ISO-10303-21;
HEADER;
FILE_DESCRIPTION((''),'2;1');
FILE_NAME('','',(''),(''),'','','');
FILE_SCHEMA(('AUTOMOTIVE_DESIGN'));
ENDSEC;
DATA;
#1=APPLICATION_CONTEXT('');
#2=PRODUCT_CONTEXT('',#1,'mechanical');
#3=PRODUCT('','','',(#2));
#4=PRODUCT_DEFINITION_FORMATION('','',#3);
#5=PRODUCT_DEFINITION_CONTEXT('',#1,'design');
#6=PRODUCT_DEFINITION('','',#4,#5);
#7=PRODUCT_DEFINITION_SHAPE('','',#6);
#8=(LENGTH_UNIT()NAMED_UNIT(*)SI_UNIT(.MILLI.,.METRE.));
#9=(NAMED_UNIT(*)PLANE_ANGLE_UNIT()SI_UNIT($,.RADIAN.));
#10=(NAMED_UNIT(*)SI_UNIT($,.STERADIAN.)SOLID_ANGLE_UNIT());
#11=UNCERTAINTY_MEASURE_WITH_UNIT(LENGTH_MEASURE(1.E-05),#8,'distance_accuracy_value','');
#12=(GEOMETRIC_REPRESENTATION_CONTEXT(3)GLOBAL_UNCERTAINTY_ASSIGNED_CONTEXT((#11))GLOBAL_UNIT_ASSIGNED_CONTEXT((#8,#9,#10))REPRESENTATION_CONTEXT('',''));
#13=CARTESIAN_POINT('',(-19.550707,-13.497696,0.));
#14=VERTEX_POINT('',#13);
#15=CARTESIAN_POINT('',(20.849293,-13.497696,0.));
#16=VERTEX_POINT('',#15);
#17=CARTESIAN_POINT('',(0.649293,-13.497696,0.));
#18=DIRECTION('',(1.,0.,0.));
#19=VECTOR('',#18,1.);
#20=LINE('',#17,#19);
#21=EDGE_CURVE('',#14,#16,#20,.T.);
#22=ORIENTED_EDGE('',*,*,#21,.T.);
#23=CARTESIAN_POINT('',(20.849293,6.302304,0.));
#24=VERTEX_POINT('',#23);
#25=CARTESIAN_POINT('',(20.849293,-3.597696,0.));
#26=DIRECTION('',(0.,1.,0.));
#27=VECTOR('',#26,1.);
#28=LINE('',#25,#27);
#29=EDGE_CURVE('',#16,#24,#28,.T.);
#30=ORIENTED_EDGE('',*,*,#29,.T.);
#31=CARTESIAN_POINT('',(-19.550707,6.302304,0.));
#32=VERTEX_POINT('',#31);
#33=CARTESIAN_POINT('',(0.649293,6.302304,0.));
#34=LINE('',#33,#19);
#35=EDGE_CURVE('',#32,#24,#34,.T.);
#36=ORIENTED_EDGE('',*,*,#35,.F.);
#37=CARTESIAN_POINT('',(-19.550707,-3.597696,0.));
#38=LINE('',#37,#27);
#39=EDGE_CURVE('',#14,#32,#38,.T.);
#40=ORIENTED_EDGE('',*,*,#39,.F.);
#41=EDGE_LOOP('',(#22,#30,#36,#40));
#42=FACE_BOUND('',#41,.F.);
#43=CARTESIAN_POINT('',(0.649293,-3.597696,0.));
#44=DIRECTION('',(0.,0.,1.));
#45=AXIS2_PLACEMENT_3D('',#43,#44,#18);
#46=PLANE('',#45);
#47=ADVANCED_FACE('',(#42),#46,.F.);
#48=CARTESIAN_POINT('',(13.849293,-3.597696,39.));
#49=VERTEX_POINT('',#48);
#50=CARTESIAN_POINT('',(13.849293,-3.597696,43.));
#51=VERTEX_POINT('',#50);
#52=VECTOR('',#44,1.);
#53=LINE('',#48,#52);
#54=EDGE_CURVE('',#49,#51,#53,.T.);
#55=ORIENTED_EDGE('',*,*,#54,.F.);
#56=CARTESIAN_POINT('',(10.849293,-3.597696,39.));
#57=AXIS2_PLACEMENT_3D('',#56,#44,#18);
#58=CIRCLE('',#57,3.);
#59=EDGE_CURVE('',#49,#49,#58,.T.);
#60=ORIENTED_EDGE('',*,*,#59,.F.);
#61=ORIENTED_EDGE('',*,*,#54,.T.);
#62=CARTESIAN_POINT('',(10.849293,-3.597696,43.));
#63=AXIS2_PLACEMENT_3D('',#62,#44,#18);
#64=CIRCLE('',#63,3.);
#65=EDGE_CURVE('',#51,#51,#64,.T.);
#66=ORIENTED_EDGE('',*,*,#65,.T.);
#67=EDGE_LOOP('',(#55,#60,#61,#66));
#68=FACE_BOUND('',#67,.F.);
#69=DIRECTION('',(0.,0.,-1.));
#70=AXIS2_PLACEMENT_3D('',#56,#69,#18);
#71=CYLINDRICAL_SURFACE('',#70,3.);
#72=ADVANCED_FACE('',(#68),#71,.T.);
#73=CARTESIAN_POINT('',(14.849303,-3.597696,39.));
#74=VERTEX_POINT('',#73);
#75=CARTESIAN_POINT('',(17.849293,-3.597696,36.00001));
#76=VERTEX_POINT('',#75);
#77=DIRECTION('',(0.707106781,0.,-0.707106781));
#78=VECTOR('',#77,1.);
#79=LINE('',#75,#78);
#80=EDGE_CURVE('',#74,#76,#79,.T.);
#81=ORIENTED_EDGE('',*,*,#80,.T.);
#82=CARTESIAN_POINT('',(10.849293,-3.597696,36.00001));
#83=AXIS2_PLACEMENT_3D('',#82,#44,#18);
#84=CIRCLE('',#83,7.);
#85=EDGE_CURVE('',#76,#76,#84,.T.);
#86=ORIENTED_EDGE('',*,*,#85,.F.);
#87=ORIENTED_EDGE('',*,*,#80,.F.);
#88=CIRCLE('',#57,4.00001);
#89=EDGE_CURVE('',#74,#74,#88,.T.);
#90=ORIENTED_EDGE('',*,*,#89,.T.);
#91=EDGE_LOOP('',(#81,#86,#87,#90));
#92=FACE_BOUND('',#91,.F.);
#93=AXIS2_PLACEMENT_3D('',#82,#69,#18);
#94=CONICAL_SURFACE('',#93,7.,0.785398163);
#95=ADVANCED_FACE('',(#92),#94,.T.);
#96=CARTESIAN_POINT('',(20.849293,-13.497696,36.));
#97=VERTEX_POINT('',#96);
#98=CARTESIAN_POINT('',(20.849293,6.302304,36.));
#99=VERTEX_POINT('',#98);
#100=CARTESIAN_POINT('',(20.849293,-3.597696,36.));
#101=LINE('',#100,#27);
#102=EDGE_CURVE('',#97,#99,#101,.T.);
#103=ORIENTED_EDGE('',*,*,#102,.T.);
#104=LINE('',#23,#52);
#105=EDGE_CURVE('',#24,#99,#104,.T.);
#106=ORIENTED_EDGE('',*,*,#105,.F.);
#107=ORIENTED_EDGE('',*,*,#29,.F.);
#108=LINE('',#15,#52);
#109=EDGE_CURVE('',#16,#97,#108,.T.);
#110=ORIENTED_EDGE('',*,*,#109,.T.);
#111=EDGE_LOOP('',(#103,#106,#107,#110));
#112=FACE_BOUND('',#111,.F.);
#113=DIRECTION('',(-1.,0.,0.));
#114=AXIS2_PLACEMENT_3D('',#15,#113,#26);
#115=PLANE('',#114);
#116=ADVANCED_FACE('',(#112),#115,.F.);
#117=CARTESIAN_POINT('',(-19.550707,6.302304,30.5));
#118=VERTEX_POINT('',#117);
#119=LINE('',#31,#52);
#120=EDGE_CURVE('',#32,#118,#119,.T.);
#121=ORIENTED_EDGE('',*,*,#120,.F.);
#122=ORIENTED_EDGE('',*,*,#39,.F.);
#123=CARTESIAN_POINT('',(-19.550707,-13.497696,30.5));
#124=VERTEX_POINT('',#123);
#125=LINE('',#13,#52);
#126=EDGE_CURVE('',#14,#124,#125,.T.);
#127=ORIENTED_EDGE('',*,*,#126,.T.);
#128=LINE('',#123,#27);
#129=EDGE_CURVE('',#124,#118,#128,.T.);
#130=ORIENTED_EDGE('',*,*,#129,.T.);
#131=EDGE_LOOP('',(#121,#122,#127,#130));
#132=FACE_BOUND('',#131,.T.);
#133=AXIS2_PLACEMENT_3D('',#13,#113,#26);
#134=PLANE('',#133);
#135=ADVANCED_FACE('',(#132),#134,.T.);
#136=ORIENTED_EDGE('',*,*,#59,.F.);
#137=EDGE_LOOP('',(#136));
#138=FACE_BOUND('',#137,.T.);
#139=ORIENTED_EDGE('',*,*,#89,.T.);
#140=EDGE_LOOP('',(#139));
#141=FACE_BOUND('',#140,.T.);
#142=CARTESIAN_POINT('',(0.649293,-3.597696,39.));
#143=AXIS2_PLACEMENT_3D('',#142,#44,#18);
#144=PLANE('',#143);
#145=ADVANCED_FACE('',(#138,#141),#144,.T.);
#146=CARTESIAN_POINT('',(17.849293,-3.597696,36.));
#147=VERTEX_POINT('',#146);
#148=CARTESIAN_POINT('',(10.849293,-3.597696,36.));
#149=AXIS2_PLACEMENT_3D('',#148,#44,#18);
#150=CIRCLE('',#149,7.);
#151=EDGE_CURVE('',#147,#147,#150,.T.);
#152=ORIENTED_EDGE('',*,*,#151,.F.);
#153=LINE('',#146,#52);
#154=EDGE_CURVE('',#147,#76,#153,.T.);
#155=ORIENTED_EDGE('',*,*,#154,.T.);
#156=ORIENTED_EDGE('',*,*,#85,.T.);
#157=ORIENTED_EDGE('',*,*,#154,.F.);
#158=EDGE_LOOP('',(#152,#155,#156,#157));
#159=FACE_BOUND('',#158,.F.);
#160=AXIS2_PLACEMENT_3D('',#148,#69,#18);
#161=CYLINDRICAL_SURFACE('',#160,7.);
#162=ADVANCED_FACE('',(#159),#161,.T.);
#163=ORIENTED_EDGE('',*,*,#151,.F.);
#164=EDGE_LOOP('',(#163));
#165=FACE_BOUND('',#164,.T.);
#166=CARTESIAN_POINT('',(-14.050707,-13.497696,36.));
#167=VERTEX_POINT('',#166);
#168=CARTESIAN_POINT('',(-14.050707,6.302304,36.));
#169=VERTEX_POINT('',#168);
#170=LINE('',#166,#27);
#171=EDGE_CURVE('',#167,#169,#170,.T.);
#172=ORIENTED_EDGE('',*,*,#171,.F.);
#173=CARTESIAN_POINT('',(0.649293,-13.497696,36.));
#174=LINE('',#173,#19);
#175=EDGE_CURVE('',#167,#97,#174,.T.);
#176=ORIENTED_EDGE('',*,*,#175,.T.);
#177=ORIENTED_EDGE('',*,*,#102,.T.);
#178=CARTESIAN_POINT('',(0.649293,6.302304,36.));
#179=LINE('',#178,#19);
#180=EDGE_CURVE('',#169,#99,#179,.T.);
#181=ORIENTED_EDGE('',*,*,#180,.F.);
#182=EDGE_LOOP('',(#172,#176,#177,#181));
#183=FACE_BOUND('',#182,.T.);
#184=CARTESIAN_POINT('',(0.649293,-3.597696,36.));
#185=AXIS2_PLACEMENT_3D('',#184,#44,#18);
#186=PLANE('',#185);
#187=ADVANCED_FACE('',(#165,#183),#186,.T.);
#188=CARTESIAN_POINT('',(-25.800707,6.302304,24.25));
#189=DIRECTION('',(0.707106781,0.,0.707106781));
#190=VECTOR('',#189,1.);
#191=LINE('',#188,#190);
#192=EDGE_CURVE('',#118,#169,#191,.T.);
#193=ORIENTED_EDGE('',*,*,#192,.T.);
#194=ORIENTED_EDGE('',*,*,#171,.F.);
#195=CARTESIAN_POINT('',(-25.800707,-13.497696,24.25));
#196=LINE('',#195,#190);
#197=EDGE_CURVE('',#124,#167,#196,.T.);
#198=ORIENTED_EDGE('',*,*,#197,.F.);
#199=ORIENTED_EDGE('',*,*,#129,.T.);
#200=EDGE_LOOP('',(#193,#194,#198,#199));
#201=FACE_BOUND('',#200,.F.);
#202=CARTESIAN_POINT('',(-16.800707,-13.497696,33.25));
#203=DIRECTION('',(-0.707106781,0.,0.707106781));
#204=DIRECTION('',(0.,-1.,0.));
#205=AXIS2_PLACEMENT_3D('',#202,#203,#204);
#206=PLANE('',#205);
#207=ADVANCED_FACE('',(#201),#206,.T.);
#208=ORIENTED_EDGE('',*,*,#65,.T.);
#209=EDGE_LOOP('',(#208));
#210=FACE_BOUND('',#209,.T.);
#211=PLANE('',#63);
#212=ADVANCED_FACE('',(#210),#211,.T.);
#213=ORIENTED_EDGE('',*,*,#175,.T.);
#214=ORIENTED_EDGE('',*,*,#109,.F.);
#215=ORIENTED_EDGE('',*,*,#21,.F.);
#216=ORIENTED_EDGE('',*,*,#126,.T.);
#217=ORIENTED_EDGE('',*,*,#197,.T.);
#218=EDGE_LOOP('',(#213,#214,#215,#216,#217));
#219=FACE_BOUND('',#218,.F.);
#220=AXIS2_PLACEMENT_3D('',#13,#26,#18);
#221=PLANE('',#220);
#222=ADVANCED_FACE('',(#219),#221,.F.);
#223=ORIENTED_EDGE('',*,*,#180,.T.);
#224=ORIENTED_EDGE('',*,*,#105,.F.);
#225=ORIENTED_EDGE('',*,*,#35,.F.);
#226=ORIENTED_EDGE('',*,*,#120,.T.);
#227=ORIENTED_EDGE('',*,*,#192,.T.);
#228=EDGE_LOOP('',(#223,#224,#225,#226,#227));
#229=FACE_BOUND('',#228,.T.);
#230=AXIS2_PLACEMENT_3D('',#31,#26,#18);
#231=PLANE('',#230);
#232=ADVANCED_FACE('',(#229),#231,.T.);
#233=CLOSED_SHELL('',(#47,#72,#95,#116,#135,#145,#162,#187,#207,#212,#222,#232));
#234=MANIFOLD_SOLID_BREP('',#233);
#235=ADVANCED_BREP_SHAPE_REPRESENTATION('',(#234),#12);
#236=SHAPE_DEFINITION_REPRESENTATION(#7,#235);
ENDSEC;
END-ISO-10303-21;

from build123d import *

# Parameters (mm, degrees)
F0_W     = 40.4
F0_H     = 19.8
F1_DEPTH = 36
F2_SIZE  = 5.5
F3_R     = 7
F3_R_2   = 5
F4_DEPTH = 3
F5_DEPTH = 3
F6_SIZE  = 2.99999
F7_R     = 3
F8_DEPTH = 4


# Not quite as in the source:
# - a fillet or chamfer is up to 0.001 mm smaller than in the source, because OpenCascade refuses the exact size


with BuildPart() as f1:
    # F0 (on Top) → F1 (new body)
    with BuildSketch(Plane.XY):
        with Locations((0.6492929533, -3.5976961023)):
            Rectangle(F0_W, F0_H)
    extrude(amount=F1_DEPTH)

    # F2
    f2_edges = [f1.edges().sort_by_distance(p)[0] for p in [
        (-19.550707, -3.597696, 36),
    ]]
    chamfer(f2_edges, length=F2_SIZE)

    # F3 (on face) → F4 (join)
    with BuildSketch(Plane.XY.offset(36)):
        with Locations((10.8492929533, -3.5976961023)):
            Circle(F3_R)
        with Locations((10.8492929533, -3.5976961023)):
            Circle(F3_R_2, mode=Mode.SUBTRACT)
    extrude(amount=F4_DEPTH)

    # F5 (add): a face of the model
    f5_faces = [f1.faces().sort_by_distance(p)[0] for p in [
        (10.8492929533, -3.5976961023, 36),
    ]]
    extrude(f5_faces, amount=F5_DEPTH)

    # F6 (size 3 in the source; OpenCascade refuses exactly that, so slightly less here)
    f6_edges = [f1.edges().sort_by_distance(p)[0] for p in [
        (3.849293, -3.597696, 39),
    ]]
    chamfer(f6_edges, length=F6_SIZE)

    # F7 (on face) → F8 (join)
    with BuildSketch(Plane.XY.offset(39)):
        with Locations((10.8492929533, -3.5976961023)):
            Circle(F7_R)
    extrude(amount=F8_DEPTH)


solid = f1.part
